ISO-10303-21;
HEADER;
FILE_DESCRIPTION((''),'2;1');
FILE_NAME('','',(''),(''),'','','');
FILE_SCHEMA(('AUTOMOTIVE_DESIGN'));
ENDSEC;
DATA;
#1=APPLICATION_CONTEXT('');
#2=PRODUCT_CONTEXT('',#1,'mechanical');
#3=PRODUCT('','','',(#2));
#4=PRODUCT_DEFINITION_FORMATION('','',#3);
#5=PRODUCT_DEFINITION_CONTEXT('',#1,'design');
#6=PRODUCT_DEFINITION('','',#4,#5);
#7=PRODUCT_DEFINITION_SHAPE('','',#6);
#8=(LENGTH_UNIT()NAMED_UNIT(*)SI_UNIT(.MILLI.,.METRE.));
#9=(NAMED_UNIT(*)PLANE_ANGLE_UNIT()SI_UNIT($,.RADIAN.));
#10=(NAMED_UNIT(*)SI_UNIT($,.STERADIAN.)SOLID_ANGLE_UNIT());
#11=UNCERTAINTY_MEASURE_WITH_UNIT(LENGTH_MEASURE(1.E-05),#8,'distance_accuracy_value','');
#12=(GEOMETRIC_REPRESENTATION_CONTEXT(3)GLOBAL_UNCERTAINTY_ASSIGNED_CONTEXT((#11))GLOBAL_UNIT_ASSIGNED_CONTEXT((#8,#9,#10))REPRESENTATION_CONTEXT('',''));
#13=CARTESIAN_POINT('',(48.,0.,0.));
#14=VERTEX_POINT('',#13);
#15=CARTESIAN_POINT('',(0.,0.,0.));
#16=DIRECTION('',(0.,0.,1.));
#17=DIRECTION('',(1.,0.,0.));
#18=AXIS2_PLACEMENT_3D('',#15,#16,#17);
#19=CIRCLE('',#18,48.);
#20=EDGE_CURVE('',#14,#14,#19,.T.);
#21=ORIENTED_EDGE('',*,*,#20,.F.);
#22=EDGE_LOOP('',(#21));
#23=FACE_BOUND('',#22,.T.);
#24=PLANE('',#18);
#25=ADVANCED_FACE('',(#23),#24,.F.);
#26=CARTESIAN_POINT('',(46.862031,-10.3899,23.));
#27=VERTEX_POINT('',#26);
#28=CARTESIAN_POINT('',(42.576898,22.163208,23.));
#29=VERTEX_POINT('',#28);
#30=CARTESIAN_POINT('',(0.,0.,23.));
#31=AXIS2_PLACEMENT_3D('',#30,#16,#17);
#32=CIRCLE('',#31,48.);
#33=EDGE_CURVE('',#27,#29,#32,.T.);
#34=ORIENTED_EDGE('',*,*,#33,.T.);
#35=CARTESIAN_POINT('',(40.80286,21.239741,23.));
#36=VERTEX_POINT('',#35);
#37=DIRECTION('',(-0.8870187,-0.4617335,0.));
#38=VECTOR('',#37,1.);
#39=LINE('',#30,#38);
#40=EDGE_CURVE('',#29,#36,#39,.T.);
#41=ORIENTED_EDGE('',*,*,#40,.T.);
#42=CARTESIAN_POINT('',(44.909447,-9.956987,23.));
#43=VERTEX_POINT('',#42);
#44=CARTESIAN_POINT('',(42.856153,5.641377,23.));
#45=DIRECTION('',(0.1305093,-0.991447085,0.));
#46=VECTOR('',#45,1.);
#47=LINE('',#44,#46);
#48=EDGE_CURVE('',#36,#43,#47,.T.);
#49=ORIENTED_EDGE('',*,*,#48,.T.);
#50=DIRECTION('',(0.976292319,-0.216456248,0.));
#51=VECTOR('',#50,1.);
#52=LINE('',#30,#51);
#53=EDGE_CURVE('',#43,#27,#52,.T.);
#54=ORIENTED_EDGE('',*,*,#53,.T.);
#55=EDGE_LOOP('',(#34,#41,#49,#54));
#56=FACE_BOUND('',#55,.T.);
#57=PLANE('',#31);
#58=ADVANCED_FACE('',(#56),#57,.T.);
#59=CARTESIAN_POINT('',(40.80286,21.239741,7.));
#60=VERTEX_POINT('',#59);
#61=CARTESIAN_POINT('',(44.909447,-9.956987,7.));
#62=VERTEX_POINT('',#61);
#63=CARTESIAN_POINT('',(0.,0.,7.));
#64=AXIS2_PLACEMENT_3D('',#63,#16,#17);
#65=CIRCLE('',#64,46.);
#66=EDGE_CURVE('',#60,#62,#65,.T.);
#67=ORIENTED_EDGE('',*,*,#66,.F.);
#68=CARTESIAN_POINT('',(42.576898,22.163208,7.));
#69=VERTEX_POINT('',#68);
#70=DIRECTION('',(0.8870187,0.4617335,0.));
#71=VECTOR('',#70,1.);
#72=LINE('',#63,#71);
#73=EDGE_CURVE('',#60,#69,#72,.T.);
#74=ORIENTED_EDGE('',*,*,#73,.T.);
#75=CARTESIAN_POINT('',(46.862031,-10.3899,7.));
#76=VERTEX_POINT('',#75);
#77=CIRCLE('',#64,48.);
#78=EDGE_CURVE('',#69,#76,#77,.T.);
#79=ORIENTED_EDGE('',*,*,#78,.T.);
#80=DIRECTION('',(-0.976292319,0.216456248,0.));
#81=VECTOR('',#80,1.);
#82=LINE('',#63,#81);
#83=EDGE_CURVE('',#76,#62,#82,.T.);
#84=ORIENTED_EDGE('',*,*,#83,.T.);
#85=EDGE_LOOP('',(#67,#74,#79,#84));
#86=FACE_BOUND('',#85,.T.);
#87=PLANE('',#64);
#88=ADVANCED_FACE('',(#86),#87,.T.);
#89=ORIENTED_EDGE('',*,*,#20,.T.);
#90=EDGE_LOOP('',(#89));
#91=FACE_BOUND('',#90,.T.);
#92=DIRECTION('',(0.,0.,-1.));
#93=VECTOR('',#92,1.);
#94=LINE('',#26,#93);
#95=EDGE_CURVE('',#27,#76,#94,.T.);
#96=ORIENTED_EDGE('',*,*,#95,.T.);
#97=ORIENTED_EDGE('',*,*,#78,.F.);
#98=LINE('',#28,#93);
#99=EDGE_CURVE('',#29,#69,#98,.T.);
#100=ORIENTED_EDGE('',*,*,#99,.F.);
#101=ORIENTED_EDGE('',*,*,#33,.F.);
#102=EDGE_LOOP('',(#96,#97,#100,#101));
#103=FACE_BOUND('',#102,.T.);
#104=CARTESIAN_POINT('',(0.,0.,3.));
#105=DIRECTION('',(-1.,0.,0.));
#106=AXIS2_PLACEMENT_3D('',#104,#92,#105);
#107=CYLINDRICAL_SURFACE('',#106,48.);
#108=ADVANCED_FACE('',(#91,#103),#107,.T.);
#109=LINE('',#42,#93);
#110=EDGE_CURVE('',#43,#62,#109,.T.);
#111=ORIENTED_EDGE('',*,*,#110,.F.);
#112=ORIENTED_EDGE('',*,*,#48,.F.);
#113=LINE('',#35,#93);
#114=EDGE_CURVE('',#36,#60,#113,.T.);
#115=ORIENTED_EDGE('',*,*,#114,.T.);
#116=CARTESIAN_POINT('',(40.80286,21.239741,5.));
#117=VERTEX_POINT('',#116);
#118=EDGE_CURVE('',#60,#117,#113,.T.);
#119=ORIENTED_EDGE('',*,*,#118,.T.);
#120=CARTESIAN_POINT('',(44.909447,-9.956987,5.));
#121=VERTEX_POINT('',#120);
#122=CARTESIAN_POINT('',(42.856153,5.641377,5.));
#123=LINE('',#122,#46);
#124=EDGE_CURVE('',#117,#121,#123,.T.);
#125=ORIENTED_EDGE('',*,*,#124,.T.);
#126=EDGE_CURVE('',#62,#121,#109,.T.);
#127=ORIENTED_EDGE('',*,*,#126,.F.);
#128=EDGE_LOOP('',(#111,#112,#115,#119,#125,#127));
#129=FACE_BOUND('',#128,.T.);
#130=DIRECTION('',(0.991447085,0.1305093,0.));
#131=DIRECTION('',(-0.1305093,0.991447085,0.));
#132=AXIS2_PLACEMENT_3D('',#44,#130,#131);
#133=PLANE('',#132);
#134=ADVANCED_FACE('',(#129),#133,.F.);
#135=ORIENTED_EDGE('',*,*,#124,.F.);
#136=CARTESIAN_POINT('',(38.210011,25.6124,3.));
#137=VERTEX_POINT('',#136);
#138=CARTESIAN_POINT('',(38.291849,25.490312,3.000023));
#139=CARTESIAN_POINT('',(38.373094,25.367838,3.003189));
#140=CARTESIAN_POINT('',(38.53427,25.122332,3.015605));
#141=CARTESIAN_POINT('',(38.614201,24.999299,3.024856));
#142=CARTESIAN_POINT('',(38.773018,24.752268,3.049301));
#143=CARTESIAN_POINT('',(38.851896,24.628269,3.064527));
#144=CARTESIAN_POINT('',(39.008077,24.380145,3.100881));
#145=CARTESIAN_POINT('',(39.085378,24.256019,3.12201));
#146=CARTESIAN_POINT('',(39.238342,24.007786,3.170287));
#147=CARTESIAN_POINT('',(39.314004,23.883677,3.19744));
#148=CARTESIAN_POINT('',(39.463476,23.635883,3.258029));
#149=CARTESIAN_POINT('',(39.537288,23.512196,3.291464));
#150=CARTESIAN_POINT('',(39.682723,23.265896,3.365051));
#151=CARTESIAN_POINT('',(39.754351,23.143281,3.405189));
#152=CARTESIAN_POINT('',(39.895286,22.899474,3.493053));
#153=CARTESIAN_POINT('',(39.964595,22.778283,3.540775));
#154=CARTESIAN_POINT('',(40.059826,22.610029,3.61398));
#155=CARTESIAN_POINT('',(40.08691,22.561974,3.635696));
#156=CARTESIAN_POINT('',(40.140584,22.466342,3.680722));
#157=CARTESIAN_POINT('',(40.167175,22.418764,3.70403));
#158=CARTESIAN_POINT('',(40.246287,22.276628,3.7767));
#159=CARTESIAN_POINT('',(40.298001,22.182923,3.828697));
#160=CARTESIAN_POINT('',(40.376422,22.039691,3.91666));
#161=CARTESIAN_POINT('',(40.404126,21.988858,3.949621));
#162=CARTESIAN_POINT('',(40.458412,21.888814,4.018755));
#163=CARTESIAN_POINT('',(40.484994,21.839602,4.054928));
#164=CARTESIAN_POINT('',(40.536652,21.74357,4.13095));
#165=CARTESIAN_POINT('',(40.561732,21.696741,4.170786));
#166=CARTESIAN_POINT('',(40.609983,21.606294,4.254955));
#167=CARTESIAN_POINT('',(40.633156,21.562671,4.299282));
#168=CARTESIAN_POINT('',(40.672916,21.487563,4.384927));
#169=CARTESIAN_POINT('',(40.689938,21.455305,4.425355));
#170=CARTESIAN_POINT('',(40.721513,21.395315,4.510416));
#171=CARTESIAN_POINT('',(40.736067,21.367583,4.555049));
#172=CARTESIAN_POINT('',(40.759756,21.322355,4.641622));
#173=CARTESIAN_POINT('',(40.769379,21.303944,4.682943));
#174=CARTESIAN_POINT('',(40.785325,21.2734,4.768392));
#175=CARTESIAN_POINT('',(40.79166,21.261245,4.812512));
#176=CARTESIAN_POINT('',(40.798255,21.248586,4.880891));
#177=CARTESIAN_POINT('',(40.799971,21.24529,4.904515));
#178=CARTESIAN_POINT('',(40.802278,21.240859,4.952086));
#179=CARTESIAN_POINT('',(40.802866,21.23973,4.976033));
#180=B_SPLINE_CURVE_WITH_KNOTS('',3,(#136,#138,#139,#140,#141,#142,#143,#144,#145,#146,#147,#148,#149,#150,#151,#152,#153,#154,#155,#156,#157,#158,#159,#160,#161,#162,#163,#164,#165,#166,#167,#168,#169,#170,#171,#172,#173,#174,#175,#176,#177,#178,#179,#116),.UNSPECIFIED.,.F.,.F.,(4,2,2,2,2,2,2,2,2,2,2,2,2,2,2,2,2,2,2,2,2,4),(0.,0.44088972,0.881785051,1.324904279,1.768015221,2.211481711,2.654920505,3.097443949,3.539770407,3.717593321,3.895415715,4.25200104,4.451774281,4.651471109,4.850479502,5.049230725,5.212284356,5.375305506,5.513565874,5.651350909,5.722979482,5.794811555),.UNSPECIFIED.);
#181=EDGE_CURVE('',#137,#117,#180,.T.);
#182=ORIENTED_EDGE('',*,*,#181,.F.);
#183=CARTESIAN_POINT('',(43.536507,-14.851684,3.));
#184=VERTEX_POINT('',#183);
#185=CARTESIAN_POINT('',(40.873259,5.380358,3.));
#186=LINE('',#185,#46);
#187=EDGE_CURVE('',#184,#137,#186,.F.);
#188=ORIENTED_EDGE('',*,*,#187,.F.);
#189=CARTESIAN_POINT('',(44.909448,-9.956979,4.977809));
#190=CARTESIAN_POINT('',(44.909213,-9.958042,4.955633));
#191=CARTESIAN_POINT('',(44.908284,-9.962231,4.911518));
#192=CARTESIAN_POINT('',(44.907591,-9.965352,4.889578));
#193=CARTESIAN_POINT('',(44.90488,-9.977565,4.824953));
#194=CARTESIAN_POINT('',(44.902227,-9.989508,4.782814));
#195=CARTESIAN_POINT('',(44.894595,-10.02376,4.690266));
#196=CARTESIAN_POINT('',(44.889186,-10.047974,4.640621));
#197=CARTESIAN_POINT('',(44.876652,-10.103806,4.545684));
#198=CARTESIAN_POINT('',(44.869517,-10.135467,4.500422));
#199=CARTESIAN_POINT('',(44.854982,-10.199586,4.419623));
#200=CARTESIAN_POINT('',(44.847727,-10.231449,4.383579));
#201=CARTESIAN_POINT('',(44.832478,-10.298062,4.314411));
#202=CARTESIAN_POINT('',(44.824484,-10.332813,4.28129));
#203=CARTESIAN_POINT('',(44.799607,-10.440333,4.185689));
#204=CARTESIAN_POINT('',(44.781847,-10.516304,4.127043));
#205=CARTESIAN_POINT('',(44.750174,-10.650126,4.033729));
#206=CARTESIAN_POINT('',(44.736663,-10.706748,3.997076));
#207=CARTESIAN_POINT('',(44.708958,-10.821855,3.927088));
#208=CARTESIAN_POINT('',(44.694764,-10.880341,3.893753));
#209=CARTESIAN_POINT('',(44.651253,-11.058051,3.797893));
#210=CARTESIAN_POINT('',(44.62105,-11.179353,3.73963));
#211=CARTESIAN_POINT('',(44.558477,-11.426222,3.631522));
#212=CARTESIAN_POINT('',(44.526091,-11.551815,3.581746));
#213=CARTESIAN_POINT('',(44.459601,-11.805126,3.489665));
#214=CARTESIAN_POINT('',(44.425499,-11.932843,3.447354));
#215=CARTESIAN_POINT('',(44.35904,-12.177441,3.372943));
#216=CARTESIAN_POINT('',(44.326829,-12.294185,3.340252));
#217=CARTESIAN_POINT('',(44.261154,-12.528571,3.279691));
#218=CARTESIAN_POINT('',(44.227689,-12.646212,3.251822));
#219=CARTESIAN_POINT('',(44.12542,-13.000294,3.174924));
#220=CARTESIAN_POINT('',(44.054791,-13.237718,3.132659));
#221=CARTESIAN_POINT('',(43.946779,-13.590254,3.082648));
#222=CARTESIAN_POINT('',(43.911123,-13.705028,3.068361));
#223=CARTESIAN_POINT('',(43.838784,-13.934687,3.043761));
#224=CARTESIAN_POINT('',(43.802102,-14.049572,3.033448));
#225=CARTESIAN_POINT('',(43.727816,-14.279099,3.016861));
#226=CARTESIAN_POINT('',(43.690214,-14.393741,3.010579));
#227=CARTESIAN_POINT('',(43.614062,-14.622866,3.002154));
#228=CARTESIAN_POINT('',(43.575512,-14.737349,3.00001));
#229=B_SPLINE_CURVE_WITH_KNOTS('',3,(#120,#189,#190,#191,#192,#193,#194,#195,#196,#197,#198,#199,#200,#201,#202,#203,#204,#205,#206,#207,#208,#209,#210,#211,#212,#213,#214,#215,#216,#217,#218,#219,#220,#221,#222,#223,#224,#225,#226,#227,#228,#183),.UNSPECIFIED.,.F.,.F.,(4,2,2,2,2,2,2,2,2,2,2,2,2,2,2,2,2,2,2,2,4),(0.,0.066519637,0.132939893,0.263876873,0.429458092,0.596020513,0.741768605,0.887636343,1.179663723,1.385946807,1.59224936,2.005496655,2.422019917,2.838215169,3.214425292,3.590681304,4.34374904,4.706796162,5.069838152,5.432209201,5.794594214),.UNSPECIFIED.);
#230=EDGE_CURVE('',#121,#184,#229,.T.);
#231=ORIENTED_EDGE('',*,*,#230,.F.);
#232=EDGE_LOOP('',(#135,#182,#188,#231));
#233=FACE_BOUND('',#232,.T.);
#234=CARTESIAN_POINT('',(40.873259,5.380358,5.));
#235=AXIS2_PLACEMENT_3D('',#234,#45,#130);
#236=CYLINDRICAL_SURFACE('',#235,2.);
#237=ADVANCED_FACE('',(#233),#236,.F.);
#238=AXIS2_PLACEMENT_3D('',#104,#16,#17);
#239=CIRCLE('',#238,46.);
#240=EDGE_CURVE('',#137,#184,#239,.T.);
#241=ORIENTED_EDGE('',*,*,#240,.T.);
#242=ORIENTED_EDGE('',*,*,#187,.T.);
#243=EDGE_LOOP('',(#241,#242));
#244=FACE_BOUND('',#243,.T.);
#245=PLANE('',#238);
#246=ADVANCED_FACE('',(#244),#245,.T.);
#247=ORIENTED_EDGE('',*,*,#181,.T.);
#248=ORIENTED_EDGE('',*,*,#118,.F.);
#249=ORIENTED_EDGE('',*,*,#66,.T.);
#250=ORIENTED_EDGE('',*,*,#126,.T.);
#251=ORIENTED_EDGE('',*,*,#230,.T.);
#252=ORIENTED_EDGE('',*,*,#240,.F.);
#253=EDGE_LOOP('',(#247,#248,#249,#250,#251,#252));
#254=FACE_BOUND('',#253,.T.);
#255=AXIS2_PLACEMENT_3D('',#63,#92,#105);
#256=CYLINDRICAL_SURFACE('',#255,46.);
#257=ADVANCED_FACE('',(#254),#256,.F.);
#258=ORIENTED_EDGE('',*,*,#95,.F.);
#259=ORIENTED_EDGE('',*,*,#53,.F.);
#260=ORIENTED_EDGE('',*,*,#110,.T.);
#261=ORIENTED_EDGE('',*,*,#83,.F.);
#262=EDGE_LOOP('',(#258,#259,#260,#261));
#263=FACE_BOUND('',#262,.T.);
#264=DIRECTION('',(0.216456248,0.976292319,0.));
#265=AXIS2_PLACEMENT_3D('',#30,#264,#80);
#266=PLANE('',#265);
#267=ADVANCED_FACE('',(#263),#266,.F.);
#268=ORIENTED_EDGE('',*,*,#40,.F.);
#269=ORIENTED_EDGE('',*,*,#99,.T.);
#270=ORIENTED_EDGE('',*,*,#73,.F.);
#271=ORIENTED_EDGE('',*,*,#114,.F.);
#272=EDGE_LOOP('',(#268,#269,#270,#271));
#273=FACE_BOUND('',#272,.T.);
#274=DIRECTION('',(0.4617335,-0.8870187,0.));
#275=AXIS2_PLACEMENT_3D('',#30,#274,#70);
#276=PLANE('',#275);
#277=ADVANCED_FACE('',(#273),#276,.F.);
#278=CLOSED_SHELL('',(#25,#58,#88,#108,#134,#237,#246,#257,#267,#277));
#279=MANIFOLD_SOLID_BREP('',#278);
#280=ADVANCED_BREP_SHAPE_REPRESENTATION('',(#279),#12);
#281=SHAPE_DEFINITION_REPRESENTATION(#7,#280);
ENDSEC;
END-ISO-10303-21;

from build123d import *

# Parameters (mm, degrees)
SKETCH1_R           = 48
BOSS_EXTRUDE1_DEPTH = 3
SKETCH2_R           = 48
SKETCH2_R_2         = 46
BOSS_EXTRUDE2_DEPTH = 4
BOSS_EXTRUDE3_DEPTH = 20
FILLET1_R           = 2


with BuildPart() as part:
    # Sketch1 → Boss-Extrude1 (new body)
    with BuildSketch(Plane(origin=(0, 0, 0), x_dir=(0, 1, 0), z_dir=(0, 0, 1))):
        Circle(SKETCH1_R)
    extrude(amount=BOSS_EXTRUDE1_DEPTH)

    # Sketch2 → Boss-Extrude2 (add)
    with BuildSketch(Plane.XY.offset(3)):
        Circle(SKETCH2_R)
        Circle(SKETCH2_R_2, mode=Mode.SUBTRACT)
    extrude(amount=BOSS_EXTRUDE2_DEPTH)

    # Sketch3 → Boss-Extrude3 (add)
    with BuildSketch(Plane.XY.offset(3)):
        with BuildLine():
            Line((42.576897618, 22.163208008), (40.802860217, 21.239741008))
            Line((40.802860217, 21.239741008), (44.909446686, -9.956987415))
            Line((44.909446686, -9.956987415), (46.862031324, -10.389899911))
            ThreePointArc((46.862031324, -10.389899911), (47.589460087, 6.264446393), (42.576897618, 22.163208008))
        make_face()
    extrude(amount=BOSS_EXTRUDE3_DEPTH)

    # Fillet1
    fillet1_edges = [part.edges().sort_by_distance(p)[0] for p in [
        (42.856153452, 5.641376796, 3),
    ]]
    fillet(fillet1_edges, radius=FILLET1_R)


solid = part.part
